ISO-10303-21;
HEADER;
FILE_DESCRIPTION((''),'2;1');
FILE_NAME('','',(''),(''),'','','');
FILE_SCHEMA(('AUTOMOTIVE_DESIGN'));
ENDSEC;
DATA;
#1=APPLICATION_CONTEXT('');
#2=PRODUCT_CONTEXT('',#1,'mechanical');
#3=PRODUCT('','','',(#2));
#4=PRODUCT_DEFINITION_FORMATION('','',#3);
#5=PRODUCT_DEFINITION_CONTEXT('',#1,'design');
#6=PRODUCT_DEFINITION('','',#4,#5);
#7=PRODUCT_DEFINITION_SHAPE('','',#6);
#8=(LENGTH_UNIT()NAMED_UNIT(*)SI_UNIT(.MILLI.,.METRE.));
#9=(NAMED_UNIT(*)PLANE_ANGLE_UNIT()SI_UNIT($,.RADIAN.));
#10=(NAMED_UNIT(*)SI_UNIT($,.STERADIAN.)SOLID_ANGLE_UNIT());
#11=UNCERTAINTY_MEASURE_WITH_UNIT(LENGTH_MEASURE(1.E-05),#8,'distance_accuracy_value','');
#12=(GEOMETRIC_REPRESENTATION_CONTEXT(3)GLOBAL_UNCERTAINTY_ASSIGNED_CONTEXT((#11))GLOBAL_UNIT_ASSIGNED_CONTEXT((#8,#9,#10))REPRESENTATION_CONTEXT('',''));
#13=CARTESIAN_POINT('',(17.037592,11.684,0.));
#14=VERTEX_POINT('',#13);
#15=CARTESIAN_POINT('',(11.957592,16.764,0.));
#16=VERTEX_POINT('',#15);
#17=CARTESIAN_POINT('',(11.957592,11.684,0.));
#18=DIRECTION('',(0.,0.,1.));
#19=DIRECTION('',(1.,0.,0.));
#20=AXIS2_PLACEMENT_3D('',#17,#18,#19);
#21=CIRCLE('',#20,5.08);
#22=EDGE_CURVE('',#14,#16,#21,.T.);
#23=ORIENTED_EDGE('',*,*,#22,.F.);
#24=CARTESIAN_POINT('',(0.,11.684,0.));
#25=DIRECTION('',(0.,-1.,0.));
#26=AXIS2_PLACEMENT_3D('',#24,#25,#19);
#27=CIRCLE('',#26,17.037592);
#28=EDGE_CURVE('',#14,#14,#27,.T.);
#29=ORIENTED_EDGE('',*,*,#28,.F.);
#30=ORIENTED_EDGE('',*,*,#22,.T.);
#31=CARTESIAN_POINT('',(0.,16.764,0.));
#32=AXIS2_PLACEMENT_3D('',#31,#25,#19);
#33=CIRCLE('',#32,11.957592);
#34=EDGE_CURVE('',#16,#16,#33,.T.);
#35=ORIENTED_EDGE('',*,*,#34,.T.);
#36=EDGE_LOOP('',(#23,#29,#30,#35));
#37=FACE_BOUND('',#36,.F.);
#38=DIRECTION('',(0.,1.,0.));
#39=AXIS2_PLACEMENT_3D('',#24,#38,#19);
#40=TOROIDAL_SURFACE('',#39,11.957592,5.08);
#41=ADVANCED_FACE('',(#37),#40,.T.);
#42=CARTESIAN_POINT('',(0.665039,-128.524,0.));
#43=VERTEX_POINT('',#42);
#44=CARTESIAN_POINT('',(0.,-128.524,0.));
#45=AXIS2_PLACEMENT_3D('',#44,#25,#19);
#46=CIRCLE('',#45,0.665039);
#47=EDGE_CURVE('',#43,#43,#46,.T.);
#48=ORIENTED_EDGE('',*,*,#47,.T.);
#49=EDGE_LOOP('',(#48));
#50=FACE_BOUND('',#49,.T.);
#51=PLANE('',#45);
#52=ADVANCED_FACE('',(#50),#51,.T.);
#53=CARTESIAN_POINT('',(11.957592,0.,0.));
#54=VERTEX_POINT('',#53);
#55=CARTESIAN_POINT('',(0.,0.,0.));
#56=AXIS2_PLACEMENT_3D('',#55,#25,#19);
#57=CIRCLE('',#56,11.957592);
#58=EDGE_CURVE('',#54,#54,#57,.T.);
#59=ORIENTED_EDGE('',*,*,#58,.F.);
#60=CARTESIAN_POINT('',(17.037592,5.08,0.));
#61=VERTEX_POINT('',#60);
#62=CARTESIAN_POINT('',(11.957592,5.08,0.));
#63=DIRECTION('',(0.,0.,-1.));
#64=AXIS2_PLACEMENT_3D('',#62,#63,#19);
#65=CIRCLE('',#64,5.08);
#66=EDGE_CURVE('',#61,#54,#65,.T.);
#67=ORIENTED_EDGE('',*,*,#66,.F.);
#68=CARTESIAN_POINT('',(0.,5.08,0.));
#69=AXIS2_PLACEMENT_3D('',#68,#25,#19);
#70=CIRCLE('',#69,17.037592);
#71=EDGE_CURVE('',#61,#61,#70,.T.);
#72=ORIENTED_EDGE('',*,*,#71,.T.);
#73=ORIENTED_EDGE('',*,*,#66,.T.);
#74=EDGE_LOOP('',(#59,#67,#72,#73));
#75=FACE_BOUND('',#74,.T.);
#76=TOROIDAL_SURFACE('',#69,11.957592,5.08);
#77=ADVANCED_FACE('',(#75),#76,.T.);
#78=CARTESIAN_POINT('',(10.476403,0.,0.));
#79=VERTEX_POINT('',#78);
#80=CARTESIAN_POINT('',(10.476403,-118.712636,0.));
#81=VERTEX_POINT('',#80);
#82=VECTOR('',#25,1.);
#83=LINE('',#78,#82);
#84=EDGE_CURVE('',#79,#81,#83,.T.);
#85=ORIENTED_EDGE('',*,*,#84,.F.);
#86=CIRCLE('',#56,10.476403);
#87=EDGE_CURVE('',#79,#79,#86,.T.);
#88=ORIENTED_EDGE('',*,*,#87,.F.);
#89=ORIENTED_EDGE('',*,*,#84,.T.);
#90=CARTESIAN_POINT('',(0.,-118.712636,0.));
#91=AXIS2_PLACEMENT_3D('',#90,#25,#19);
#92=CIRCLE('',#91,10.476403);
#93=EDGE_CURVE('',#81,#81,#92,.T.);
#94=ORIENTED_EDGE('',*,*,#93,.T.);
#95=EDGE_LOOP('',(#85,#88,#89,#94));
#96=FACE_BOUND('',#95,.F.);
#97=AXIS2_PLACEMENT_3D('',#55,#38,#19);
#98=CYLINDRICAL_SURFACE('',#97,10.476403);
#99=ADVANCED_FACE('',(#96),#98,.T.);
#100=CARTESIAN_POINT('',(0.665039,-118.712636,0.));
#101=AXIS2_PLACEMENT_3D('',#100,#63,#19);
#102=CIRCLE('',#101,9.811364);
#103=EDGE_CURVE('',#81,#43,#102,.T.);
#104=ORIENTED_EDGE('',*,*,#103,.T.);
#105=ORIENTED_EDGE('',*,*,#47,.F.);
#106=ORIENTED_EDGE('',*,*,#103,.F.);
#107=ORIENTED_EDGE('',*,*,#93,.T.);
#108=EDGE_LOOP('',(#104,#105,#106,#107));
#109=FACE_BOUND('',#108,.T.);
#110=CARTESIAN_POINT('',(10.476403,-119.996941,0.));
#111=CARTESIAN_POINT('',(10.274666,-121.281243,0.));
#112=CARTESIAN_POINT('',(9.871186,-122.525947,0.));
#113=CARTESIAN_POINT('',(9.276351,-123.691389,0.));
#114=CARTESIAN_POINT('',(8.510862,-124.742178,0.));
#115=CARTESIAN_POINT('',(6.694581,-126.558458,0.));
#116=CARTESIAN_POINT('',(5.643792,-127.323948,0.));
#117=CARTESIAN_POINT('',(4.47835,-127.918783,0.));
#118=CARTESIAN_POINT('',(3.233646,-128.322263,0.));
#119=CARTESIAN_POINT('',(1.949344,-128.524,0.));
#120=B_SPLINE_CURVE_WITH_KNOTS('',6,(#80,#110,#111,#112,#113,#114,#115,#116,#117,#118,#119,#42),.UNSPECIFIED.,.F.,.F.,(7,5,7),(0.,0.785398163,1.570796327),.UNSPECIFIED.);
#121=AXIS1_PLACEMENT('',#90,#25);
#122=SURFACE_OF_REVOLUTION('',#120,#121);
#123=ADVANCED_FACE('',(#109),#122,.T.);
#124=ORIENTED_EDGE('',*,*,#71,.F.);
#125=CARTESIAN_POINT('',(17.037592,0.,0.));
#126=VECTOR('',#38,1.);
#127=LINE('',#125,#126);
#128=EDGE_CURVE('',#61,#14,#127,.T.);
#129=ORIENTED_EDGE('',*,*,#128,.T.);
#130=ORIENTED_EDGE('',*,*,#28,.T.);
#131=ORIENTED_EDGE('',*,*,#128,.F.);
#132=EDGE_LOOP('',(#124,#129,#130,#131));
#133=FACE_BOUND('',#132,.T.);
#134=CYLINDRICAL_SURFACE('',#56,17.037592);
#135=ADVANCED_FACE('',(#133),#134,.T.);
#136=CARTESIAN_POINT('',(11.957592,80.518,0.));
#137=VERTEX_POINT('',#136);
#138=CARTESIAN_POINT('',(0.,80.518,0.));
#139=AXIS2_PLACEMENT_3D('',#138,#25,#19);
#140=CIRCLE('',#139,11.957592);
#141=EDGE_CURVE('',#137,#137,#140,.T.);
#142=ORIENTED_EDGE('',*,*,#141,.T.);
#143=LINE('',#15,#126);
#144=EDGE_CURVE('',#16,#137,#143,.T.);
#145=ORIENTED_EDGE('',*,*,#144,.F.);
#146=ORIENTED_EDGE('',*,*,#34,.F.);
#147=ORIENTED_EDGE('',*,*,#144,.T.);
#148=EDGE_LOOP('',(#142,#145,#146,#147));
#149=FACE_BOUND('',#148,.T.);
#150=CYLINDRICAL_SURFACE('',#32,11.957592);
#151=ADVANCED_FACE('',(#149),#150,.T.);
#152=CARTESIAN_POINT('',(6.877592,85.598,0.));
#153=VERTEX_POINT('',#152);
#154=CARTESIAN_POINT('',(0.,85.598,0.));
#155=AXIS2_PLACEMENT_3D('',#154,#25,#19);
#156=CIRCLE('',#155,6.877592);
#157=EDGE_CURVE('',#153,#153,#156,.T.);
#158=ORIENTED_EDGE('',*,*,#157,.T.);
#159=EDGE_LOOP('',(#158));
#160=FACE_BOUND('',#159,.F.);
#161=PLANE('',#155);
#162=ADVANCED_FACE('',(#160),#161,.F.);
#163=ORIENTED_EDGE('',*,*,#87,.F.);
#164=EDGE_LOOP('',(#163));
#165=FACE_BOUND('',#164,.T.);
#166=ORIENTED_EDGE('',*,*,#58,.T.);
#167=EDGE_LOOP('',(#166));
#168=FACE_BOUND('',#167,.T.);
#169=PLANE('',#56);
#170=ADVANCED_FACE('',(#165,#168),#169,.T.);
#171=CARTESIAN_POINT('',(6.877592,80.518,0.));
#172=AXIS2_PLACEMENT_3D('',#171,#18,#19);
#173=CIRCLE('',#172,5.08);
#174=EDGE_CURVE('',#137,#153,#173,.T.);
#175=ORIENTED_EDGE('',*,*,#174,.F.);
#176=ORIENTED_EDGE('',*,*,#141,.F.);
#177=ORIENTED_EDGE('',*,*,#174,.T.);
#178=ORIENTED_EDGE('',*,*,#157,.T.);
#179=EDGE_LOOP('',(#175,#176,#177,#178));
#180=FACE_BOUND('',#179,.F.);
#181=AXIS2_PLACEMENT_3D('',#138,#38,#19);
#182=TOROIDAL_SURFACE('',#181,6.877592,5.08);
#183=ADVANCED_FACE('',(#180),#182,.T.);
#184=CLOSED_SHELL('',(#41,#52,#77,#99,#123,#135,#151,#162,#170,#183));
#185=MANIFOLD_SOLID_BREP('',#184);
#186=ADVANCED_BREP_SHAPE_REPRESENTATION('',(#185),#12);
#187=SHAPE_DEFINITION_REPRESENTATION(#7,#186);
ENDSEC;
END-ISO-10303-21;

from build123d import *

# Parameters (mm, degrees)
F0_R     = 10.4764033566
F1_DEPTH = 128.524
F2_R     = 9.8113639175
F3_R     = 17.037591744
F4_DEPTH = 16.764
F5_R     = 5.08
F6_R     = 5.08
F7_DEPTH = 68.834
F8_R     = 5.08


with BuildPart() as f1:
    # F0 (on Front) → F1 (new body)
    with BuildSketch(Plane.XZ):
        Circle(F0_R)
    extrude(amount=F1_DEPTH)

    # F2
    f2_edges = [f1.edges().sort_by_distance(p)[0] for p in [
        (-10.476403, -128.524, 0),
    ]]
    fillet(f2_edges, radius=F2_R)

    # F3 (on Front) → F4 (join)
    with BuildSketch(Plane.XZ):
        Circle(F3_R)
    extrude(amount=-F4_DEPTH)

    # F5
    f5_edges = [f1.edges().sort_by_distance(p)[0] for p in [
        (-17.037592, 16.764, 0),
    ]]
    fillet(f5_edges, radius=F5_R)

    # F6
    f6_edges = [f1.edges().sort_by_distance(p)[0] for p in [
        (-17.037592, 0, 0),
    ]]
    fillet(f6_edges, radius=F6_R)

    # F7 (add): a face of the model
    f7_faces = [f1.faces().sort_by_distance(p)[0] for p in [
        (0, 16.764, 0),
    ]]
    extrude(f7_faces, amount=F7_DEPTH)

    # F8
    f8_edges = [f1.edges().sort_by_distance(p)[0] for p in [
        (-11.957592, 85.598, 0),
    ]]
    fillet(f8_edges, radius=F8_R)


solid = f1.part
